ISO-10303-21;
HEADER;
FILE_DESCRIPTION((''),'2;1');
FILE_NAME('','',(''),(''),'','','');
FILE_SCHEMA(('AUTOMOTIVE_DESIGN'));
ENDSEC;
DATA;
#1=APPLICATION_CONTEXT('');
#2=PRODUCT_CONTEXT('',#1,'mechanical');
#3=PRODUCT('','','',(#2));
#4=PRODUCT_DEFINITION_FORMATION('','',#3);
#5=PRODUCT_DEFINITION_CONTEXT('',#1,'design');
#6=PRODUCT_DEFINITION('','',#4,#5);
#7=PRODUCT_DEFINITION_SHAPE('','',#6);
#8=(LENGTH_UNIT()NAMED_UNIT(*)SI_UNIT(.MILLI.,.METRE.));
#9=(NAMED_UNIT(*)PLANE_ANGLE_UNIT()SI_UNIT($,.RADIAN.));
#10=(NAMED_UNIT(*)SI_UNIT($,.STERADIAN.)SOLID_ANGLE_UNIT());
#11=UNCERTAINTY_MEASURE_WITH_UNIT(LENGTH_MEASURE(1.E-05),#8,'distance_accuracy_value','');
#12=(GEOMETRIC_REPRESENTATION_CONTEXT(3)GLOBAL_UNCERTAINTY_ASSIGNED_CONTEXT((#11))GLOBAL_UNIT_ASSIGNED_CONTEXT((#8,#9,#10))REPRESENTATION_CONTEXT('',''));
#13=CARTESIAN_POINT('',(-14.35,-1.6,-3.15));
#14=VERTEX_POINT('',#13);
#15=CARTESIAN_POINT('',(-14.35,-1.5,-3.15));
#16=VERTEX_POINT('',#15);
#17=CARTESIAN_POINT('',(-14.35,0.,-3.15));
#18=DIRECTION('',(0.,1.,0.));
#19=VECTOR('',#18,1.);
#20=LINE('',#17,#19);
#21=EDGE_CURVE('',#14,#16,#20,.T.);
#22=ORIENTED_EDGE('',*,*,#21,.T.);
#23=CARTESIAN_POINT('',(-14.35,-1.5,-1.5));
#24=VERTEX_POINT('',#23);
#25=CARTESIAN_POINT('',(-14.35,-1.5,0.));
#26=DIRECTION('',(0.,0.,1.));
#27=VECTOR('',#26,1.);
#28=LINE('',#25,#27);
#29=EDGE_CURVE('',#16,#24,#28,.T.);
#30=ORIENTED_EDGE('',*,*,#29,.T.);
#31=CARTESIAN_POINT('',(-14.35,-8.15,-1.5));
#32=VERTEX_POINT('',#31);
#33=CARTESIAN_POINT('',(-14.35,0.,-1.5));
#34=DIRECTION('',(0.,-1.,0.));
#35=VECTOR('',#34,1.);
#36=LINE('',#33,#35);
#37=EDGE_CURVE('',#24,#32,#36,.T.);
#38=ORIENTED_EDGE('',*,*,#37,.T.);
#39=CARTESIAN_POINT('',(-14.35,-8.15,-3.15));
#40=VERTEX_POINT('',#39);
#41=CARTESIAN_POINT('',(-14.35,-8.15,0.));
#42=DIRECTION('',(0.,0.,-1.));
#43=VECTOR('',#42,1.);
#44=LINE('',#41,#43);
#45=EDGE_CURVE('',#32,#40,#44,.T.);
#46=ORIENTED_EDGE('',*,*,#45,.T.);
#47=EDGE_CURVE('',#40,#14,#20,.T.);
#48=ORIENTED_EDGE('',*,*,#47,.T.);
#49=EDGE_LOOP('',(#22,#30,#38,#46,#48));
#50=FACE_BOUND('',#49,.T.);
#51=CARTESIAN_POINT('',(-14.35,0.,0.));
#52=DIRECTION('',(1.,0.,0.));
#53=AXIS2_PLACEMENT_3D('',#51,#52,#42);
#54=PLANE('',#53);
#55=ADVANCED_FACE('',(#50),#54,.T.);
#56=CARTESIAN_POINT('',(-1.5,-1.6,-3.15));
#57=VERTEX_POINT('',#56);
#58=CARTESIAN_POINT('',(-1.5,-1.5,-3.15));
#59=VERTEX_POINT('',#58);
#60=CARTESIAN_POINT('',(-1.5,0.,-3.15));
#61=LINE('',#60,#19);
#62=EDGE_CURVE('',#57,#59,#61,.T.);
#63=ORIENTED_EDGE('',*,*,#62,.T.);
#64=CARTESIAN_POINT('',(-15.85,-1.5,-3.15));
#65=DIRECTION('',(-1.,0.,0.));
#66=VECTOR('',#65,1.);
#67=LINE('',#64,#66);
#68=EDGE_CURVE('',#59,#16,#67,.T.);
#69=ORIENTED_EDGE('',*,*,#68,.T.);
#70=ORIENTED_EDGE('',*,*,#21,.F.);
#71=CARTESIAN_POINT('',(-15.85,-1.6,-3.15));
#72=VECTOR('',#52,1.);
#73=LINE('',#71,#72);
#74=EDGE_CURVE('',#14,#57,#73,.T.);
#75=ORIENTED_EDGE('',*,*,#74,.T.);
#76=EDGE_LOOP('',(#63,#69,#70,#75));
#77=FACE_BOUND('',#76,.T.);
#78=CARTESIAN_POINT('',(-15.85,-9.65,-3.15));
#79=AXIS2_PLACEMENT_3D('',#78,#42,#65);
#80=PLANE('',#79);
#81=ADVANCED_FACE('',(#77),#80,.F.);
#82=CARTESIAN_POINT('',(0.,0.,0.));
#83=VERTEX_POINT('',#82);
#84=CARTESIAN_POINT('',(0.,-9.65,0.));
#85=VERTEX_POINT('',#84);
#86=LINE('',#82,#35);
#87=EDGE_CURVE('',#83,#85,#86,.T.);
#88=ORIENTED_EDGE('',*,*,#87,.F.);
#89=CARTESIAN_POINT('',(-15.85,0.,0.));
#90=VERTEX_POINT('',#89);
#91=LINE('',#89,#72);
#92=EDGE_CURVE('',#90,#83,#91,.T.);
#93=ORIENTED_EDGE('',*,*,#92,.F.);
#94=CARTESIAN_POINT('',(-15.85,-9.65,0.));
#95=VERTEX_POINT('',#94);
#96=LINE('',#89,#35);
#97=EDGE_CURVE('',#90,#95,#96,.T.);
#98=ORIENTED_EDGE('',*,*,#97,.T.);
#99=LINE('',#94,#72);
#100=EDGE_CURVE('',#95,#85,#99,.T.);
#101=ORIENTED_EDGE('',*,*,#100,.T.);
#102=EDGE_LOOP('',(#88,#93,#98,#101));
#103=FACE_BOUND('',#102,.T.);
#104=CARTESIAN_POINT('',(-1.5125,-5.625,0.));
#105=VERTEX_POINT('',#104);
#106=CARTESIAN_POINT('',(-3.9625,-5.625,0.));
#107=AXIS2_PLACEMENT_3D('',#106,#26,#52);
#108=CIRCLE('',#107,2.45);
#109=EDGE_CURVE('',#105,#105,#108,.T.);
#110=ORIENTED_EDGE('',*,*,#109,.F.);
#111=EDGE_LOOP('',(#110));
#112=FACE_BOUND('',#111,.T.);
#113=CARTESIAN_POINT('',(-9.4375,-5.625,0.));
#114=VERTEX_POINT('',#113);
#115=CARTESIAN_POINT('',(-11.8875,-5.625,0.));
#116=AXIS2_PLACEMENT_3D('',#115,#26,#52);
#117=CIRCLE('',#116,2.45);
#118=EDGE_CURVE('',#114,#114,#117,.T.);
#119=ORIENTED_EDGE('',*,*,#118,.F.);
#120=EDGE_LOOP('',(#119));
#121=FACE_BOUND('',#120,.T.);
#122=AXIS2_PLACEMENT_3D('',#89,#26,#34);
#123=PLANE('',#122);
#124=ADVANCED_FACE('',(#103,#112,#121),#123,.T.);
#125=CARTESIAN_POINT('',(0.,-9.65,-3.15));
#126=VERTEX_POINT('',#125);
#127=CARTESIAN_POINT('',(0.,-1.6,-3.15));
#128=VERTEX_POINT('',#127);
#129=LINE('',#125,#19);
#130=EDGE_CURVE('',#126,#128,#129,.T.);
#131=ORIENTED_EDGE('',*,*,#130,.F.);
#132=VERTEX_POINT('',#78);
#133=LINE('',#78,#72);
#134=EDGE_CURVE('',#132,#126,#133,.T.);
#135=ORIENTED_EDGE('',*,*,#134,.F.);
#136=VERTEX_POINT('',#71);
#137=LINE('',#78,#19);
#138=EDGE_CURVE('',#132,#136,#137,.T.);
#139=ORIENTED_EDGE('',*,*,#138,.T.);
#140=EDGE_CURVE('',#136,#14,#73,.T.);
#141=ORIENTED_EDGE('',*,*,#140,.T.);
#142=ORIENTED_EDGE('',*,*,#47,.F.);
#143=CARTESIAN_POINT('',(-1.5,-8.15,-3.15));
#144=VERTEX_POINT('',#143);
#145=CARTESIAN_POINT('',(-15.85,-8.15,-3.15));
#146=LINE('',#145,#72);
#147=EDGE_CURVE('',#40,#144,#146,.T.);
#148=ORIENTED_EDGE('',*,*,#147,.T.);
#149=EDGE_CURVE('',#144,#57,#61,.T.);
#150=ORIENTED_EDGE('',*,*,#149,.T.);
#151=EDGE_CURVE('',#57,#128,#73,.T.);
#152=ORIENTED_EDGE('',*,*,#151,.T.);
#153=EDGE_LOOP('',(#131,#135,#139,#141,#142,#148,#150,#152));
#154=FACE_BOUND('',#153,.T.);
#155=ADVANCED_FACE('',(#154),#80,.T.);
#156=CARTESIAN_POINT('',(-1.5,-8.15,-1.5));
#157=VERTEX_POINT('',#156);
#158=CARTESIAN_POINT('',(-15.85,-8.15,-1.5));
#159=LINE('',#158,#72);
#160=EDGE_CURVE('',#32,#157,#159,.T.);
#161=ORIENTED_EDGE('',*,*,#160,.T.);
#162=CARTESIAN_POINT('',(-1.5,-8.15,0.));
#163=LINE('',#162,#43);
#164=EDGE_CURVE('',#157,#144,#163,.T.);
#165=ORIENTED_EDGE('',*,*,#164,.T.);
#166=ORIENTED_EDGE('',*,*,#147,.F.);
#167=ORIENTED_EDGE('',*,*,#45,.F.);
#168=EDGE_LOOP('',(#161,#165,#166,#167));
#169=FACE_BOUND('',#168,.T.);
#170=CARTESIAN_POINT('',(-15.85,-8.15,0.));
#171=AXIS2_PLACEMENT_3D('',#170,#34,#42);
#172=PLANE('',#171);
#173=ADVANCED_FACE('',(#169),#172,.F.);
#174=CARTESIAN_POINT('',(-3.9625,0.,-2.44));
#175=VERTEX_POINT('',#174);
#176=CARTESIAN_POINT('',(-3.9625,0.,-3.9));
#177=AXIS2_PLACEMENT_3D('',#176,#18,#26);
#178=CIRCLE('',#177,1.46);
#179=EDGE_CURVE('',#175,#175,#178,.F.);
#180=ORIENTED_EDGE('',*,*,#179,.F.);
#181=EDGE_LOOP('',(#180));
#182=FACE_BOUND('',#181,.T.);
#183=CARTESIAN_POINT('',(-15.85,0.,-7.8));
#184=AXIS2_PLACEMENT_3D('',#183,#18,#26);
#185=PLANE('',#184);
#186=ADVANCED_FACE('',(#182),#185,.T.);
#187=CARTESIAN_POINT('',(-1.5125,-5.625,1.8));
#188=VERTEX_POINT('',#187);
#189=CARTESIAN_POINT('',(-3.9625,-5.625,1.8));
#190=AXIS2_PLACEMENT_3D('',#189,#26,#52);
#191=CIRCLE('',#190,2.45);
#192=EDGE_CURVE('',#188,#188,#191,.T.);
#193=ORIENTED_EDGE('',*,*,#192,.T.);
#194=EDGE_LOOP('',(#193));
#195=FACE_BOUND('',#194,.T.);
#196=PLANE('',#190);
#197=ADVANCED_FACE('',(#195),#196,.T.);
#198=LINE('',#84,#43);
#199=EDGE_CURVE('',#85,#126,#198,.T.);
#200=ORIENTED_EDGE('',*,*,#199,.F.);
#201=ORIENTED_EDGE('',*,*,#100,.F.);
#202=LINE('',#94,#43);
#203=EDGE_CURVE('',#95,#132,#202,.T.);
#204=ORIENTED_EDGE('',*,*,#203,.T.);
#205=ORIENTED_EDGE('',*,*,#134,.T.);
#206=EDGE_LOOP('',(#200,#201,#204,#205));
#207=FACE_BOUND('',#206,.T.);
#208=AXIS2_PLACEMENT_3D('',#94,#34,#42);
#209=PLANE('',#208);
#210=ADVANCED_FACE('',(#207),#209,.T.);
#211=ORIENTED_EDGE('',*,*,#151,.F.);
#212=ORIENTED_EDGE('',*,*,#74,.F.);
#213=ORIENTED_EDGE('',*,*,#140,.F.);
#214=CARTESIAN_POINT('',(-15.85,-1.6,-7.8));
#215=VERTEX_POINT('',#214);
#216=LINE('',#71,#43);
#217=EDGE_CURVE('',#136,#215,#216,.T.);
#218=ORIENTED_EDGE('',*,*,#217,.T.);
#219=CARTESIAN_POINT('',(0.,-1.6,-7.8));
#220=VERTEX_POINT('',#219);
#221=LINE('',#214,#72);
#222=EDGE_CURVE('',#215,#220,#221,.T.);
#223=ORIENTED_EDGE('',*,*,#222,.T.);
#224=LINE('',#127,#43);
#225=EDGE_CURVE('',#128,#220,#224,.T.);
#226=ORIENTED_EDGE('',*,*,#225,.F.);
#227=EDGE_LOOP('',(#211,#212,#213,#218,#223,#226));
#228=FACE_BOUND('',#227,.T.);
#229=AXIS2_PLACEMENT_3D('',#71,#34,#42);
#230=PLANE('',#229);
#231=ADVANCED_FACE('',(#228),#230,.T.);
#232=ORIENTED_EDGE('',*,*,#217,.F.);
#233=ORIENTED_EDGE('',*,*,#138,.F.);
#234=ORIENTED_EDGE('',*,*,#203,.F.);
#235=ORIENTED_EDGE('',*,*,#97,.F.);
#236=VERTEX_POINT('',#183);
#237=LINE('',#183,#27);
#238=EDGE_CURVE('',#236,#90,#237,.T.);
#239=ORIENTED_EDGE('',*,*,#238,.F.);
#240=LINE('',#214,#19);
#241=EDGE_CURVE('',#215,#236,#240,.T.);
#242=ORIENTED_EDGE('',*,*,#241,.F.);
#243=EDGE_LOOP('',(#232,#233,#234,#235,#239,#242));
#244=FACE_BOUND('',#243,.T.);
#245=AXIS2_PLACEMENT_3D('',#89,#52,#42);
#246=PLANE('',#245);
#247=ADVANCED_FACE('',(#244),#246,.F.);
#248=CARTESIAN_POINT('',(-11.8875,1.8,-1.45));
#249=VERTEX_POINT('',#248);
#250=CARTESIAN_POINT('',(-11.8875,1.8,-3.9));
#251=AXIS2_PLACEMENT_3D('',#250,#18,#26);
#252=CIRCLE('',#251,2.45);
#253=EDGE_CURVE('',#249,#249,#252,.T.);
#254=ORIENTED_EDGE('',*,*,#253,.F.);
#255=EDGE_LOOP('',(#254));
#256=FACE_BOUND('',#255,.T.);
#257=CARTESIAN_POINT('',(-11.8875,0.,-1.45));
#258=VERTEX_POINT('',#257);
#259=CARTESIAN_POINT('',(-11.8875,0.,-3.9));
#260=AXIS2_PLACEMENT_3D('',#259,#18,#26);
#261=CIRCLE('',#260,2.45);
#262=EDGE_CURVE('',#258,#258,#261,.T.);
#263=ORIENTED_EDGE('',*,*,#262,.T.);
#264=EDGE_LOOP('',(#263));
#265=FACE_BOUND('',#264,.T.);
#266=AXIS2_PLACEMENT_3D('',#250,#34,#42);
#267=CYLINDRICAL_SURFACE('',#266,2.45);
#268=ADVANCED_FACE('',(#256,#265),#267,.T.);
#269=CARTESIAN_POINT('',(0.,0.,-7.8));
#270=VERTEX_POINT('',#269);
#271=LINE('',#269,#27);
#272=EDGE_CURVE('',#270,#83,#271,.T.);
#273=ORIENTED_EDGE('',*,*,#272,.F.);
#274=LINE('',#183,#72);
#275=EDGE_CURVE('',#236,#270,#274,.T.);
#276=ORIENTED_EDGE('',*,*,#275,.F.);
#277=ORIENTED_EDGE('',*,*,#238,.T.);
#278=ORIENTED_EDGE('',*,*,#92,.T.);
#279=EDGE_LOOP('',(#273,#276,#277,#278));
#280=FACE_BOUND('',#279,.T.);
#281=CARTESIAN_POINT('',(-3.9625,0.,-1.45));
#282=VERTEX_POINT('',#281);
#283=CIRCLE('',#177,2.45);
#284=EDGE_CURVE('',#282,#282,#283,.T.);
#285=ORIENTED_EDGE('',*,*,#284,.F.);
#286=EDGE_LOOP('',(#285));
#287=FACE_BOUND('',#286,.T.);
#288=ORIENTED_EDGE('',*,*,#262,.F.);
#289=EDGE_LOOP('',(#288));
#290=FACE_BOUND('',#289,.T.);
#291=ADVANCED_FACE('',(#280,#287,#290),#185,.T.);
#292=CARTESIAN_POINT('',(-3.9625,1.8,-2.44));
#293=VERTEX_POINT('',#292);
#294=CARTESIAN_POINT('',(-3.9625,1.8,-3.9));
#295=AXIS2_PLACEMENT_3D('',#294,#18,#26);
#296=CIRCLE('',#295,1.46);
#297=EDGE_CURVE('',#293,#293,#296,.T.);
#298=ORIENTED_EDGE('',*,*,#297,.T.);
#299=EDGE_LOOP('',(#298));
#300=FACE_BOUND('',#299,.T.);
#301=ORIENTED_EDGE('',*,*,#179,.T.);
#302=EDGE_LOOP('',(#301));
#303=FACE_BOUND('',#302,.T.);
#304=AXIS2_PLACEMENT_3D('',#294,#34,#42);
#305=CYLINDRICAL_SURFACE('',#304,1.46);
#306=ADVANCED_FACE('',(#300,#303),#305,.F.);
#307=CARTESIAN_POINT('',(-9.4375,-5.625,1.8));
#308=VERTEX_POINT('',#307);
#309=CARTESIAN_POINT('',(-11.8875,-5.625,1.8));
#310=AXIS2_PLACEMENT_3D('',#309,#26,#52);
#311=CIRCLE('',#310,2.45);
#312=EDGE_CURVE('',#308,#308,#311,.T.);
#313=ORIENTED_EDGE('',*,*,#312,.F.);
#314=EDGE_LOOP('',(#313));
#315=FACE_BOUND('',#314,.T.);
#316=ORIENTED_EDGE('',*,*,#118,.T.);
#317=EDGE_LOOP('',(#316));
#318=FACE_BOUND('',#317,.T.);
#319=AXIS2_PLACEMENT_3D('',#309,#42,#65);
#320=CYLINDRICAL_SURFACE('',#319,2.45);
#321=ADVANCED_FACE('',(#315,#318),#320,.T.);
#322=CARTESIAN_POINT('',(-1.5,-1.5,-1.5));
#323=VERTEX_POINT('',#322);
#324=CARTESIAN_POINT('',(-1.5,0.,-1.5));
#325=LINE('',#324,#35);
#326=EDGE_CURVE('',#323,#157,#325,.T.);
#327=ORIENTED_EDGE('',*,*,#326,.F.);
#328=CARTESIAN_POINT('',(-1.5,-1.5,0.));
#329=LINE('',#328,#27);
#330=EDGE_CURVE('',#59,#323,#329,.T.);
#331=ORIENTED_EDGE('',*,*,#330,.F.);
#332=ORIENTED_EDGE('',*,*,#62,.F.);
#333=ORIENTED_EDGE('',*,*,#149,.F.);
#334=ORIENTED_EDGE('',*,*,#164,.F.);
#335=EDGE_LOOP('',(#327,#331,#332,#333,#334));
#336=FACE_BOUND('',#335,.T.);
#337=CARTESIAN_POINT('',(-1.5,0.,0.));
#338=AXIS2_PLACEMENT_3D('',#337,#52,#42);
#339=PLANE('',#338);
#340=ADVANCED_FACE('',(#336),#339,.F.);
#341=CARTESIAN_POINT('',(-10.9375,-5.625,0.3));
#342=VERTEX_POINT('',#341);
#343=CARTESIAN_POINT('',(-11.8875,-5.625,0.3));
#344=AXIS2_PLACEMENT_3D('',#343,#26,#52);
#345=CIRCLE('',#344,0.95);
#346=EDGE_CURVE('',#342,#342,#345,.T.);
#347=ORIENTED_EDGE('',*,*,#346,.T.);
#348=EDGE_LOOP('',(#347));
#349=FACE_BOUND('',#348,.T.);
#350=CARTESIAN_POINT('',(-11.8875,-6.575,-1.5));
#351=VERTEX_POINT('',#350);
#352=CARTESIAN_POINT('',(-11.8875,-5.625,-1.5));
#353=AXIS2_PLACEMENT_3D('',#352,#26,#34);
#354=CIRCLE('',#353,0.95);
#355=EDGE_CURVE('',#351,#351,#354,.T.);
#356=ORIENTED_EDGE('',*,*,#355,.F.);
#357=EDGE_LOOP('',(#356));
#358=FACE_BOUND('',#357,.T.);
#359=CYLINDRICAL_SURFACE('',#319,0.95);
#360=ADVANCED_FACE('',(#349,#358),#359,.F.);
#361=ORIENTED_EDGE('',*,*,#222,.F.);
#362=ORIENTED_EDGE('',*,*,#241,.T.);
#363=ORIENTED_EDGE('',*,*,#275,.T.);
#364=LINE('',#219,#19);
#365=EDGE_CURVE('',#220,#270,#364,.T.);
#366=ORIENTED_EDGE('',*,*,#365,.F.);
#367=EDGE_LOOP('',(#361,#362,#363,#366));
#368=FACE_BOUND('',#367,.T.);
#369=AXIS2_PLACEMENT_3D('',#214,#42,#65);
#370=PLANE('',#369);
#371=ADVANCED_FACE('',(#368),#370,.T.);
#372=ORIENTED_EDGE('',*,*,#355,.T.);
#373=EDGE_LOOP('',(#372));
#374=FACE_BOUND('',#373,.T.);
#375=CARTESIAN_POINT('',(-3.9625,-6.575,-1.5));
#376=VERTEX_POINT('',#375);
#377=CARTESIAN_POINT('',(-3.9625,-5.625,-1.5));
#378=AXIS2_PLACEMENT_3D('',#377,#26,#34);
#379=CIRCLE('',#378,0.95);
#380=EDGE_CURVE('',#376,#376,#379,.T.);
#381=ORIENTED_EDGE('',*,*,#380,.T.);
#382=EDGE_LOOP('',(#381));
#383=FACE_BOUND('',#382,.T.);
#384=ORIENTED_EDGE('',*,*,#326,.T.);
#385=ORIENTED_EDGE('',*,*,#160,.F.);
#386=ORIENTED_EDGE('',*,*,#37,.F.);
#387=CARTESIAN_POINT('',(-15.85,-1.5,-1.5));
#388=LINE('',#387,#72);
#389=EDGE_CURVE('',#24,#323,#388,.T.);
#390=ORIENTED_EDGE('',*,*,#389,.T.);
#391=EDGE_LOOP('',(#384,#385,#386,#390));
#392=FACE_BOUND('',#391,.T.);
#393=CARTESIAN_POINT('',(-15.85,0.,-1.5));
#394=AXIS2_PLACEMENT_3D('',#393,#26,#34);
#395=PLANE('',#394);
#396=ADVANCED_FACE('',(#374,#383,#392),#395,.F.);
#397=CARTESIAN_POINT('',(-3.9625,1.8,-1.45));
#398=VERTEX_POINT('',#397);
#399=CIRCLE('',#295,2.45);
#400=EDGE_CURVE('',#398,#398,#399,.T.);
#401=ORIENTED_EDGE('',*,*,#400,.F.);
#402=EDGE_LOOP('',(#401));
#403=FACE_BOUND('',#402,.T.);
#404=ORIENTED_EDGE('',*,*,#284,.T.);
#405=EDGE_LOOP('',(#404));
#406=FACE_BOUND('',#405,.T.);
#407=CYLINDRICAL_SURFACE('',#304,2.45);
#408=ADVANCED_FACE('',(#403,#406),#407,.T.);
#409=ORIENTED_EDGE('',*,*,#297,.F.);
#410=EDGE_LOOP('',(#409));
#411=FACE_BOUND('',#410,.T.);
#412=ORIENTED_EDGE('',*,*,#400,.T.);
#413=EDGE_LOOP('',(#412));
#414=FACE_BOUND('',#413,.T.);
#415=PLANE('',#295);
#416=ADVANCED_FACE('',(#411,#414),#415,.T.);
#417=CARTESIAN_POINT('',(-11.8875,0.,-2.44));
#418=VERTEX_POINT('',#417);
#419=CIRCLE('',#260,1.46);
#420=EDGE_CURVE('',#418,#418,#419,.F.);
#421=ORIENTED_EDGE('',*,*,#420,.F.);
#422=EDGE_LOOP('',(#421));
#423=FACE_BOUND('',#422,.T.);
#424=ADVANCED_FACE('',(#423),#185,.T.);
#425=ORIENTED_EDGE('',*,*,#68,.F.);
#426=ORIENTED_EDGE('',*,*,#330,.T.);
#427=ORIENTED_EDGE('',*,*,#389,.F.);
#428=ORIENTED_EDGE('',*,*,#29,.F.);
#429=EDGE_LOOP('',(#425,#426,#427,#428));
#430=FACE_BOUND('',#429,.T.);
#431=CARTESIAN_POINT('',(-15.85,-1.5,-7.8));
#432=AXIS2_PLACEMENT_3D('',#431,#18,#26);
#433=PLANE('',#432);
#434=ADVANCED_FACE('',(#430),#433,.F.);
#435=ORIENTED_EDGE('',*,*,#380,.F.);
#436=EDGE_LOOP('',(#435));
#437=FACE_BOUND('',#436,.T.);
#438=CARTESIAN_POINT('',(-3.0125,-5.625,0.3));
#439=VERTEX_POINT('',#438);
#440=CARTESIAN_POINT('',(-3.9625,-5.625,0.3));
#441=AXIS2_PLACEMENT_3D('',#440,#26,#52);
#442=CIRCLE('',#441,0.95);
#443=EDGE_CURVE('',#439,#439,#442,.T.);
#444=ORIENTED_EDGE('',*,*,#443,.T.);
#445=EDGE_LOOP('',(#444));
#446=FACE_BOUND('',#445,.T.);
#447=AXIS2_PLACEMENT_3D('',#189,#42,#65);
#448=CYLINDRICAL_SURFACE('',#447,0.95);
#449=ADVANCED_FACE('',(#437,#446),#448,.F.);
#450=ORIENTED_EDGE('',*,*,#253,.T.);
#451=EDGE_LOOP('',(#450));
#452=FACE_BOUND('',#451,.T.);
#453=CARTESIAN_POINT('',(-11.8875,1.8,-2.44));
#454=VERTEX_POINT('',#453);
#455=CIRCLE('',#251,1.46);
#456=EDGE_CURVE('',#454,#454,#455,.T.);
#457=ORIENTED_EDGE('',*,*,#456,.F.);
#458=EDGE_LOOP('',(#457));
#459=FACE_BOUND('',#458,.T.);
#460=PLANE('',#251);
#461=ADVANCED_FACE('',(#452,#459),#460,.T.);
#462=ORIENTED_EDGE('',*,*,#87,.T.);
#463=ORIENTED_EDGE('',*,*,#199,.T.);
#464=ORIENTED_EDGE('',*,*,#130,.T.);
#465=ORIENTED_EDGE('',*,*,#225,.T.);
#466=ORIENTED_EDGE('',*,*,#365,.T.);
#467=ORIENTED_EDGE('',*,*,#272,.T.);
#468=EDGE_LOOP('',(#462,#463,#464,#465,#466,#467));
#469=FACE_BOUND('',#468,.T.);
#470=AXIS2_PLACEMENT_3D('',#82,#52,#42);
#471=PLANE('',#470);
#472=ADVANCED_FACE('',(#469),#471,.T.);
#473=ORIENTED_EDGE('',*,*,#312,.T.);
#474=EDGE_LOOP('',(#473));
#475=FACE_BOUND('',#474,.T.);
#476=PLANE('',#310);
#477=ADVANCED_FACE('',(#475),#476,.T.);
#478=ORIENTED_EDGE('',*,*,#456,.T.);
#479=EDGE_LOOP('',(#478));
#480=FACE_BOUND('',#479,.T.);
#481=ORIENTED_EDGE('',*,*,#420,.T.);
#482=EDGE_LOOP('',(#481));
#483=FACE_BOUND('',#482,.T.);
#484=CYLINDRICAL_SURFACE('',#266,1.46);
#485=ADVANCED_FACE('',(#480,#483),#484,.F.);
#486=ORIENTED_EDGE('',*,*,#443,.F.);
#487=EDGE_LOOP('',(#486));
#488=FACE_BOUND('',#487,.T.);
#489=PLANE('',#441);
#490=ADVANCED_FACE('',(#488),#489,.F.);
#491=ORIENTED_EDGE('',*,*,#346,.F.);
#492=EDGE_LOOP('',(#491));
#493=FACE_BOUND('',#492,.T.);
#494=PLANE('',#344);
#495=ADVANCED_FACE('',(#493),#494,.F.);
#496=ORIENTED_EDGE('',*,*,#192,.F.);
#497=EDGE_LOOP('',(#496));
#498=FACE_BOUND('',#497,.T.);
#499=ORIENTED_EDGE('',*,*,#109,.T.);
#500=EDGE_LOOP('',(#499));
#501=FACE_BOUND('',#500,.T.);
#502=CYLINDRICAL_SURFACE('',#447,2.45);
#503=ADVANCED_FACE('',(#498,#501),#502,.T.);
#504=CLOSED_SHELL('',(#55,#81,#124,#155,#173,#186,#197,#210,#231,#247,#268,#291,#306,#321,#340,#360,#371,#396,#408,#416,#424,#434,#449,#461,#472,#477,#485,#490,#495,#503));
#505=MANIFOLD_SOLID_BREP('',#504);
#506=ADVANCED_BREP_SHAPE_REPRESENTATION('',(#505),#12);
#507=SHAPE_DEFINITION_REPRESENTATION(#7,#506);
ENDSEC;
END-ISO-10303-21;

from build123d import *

# Parameters (mm, degrees)
BOSS_EXTRUDE1_DEPTH = 15.85
SKETCH2_R           = 2.45
SKETCH2_R_2         = 1.46
BOSS_EXTRUDE2_DEPTH = 1.8
SKETCH3_R           = 2.45
BOSS_EXTRUDE3_DEPTH = 1.8
SHELL1_START        = -3.15
SHELL1_OUTLINE_W    = 12.85
SHELL1_OUTLINE_H    = 6.65
SHELL1_DEPTH        = 1.65
SHELL1_START_2      = -1.5
SHELL1_2_OUTLINE_R  = 0.95
SHELL1_2_DEPTH      = 1.8


# Read off the part's stored shape, not the designer's step: Shell1
with BuildPart() as part:
    # Sketch1 → Boss-Extrude1 (new body)
    with BuildSketch(Plane(origin=(0, 0, 0), x_dir=(0, 0, -1), z_dir=(1, 0, 0))):
        Polygon((0, 0), (0, -9.65), (3.15, -9.65), (3.15, -1.6), (7.8, -1.6), (7.8, 0), align=None)
    extrude(amount=-BOSS_EXTRUDE1_DEPTH)

    # Sketch2 → Boss-Extrude2 (add)
    # profile 1 of 2: a face of its own
    with BuildSketch(Plane(origin=(0, 0, 0), x_dir=(1, 0, 0), z_dir=(0, 1, 0))):
        with Locations(Location((-11.8875, 3.9, 0), (0, 0, 270))):
            Circle(SKETCH2_R)
        with Locations(Location((-11.8875, 3.9, 0), (0, 0, 270))):
            Circle(SKETCH2_R_2, mode=Mode.SUBTRACT)
    # profile 2 of 2: a face of its own
    with BuildSketch(Plane(origin=(0, 0, 0), x_dir=(1, 0, 0), z_dir=(0, 1, 0))):
        with Locations(Location((-3.9625, 3.9, 0), (0, 0, 270))):
            Circle(SKETCH2_R)
        with Locations(Location((-3.9625, 3.9, 0), (0, 0, 270))):
            Circle(SKETCH2_R_2, mode=Mode.SUBTRACT)
    extrude(amount=BOSS_EXTRUDE2_DEPTH)

    # Sketch3 → Boss-Extrude3 (add)
    with BuildSketch(Plane.XY):
        with Locations((-11.8875, -5.625)):
            Circle(SKETCH3_R)
        with Locations((-3.9625, -5.625)):
            Circle(SKETCH3_R)
    extrude(amount=BOSS_EXTRUDE3_DEPTH)

    # Shell1 outline → Shell1 (cut)
    with BuildSketch(Plane.XY.offset(SHELL1_START)):
        with Locations((-7.925, -4.825)):
            Rectangle(SHELL1_OUTLINE_W, SHELL1_OUTLINE_H)
    extrude(amount=SHELL1_DEPTH, mode=Mode.SUBTRACT)

    # Shell1 2 outline → Shell1 2 (cut)
    with BuildSketch(Plane.XY.offset(SHELL1_START_2)):
        with Locations((-11.8875, -5.625)):
            Circle(SHELL1_2_OUTLINE_R)
        with Locations((-3.9625, -5.625)):
            Circle(SHELL1_2_OUTLINE_R)
    extrude(amount=SHELL1_2_DEPTH, mode=Mode.SUBTRACT)


solid = part.part
